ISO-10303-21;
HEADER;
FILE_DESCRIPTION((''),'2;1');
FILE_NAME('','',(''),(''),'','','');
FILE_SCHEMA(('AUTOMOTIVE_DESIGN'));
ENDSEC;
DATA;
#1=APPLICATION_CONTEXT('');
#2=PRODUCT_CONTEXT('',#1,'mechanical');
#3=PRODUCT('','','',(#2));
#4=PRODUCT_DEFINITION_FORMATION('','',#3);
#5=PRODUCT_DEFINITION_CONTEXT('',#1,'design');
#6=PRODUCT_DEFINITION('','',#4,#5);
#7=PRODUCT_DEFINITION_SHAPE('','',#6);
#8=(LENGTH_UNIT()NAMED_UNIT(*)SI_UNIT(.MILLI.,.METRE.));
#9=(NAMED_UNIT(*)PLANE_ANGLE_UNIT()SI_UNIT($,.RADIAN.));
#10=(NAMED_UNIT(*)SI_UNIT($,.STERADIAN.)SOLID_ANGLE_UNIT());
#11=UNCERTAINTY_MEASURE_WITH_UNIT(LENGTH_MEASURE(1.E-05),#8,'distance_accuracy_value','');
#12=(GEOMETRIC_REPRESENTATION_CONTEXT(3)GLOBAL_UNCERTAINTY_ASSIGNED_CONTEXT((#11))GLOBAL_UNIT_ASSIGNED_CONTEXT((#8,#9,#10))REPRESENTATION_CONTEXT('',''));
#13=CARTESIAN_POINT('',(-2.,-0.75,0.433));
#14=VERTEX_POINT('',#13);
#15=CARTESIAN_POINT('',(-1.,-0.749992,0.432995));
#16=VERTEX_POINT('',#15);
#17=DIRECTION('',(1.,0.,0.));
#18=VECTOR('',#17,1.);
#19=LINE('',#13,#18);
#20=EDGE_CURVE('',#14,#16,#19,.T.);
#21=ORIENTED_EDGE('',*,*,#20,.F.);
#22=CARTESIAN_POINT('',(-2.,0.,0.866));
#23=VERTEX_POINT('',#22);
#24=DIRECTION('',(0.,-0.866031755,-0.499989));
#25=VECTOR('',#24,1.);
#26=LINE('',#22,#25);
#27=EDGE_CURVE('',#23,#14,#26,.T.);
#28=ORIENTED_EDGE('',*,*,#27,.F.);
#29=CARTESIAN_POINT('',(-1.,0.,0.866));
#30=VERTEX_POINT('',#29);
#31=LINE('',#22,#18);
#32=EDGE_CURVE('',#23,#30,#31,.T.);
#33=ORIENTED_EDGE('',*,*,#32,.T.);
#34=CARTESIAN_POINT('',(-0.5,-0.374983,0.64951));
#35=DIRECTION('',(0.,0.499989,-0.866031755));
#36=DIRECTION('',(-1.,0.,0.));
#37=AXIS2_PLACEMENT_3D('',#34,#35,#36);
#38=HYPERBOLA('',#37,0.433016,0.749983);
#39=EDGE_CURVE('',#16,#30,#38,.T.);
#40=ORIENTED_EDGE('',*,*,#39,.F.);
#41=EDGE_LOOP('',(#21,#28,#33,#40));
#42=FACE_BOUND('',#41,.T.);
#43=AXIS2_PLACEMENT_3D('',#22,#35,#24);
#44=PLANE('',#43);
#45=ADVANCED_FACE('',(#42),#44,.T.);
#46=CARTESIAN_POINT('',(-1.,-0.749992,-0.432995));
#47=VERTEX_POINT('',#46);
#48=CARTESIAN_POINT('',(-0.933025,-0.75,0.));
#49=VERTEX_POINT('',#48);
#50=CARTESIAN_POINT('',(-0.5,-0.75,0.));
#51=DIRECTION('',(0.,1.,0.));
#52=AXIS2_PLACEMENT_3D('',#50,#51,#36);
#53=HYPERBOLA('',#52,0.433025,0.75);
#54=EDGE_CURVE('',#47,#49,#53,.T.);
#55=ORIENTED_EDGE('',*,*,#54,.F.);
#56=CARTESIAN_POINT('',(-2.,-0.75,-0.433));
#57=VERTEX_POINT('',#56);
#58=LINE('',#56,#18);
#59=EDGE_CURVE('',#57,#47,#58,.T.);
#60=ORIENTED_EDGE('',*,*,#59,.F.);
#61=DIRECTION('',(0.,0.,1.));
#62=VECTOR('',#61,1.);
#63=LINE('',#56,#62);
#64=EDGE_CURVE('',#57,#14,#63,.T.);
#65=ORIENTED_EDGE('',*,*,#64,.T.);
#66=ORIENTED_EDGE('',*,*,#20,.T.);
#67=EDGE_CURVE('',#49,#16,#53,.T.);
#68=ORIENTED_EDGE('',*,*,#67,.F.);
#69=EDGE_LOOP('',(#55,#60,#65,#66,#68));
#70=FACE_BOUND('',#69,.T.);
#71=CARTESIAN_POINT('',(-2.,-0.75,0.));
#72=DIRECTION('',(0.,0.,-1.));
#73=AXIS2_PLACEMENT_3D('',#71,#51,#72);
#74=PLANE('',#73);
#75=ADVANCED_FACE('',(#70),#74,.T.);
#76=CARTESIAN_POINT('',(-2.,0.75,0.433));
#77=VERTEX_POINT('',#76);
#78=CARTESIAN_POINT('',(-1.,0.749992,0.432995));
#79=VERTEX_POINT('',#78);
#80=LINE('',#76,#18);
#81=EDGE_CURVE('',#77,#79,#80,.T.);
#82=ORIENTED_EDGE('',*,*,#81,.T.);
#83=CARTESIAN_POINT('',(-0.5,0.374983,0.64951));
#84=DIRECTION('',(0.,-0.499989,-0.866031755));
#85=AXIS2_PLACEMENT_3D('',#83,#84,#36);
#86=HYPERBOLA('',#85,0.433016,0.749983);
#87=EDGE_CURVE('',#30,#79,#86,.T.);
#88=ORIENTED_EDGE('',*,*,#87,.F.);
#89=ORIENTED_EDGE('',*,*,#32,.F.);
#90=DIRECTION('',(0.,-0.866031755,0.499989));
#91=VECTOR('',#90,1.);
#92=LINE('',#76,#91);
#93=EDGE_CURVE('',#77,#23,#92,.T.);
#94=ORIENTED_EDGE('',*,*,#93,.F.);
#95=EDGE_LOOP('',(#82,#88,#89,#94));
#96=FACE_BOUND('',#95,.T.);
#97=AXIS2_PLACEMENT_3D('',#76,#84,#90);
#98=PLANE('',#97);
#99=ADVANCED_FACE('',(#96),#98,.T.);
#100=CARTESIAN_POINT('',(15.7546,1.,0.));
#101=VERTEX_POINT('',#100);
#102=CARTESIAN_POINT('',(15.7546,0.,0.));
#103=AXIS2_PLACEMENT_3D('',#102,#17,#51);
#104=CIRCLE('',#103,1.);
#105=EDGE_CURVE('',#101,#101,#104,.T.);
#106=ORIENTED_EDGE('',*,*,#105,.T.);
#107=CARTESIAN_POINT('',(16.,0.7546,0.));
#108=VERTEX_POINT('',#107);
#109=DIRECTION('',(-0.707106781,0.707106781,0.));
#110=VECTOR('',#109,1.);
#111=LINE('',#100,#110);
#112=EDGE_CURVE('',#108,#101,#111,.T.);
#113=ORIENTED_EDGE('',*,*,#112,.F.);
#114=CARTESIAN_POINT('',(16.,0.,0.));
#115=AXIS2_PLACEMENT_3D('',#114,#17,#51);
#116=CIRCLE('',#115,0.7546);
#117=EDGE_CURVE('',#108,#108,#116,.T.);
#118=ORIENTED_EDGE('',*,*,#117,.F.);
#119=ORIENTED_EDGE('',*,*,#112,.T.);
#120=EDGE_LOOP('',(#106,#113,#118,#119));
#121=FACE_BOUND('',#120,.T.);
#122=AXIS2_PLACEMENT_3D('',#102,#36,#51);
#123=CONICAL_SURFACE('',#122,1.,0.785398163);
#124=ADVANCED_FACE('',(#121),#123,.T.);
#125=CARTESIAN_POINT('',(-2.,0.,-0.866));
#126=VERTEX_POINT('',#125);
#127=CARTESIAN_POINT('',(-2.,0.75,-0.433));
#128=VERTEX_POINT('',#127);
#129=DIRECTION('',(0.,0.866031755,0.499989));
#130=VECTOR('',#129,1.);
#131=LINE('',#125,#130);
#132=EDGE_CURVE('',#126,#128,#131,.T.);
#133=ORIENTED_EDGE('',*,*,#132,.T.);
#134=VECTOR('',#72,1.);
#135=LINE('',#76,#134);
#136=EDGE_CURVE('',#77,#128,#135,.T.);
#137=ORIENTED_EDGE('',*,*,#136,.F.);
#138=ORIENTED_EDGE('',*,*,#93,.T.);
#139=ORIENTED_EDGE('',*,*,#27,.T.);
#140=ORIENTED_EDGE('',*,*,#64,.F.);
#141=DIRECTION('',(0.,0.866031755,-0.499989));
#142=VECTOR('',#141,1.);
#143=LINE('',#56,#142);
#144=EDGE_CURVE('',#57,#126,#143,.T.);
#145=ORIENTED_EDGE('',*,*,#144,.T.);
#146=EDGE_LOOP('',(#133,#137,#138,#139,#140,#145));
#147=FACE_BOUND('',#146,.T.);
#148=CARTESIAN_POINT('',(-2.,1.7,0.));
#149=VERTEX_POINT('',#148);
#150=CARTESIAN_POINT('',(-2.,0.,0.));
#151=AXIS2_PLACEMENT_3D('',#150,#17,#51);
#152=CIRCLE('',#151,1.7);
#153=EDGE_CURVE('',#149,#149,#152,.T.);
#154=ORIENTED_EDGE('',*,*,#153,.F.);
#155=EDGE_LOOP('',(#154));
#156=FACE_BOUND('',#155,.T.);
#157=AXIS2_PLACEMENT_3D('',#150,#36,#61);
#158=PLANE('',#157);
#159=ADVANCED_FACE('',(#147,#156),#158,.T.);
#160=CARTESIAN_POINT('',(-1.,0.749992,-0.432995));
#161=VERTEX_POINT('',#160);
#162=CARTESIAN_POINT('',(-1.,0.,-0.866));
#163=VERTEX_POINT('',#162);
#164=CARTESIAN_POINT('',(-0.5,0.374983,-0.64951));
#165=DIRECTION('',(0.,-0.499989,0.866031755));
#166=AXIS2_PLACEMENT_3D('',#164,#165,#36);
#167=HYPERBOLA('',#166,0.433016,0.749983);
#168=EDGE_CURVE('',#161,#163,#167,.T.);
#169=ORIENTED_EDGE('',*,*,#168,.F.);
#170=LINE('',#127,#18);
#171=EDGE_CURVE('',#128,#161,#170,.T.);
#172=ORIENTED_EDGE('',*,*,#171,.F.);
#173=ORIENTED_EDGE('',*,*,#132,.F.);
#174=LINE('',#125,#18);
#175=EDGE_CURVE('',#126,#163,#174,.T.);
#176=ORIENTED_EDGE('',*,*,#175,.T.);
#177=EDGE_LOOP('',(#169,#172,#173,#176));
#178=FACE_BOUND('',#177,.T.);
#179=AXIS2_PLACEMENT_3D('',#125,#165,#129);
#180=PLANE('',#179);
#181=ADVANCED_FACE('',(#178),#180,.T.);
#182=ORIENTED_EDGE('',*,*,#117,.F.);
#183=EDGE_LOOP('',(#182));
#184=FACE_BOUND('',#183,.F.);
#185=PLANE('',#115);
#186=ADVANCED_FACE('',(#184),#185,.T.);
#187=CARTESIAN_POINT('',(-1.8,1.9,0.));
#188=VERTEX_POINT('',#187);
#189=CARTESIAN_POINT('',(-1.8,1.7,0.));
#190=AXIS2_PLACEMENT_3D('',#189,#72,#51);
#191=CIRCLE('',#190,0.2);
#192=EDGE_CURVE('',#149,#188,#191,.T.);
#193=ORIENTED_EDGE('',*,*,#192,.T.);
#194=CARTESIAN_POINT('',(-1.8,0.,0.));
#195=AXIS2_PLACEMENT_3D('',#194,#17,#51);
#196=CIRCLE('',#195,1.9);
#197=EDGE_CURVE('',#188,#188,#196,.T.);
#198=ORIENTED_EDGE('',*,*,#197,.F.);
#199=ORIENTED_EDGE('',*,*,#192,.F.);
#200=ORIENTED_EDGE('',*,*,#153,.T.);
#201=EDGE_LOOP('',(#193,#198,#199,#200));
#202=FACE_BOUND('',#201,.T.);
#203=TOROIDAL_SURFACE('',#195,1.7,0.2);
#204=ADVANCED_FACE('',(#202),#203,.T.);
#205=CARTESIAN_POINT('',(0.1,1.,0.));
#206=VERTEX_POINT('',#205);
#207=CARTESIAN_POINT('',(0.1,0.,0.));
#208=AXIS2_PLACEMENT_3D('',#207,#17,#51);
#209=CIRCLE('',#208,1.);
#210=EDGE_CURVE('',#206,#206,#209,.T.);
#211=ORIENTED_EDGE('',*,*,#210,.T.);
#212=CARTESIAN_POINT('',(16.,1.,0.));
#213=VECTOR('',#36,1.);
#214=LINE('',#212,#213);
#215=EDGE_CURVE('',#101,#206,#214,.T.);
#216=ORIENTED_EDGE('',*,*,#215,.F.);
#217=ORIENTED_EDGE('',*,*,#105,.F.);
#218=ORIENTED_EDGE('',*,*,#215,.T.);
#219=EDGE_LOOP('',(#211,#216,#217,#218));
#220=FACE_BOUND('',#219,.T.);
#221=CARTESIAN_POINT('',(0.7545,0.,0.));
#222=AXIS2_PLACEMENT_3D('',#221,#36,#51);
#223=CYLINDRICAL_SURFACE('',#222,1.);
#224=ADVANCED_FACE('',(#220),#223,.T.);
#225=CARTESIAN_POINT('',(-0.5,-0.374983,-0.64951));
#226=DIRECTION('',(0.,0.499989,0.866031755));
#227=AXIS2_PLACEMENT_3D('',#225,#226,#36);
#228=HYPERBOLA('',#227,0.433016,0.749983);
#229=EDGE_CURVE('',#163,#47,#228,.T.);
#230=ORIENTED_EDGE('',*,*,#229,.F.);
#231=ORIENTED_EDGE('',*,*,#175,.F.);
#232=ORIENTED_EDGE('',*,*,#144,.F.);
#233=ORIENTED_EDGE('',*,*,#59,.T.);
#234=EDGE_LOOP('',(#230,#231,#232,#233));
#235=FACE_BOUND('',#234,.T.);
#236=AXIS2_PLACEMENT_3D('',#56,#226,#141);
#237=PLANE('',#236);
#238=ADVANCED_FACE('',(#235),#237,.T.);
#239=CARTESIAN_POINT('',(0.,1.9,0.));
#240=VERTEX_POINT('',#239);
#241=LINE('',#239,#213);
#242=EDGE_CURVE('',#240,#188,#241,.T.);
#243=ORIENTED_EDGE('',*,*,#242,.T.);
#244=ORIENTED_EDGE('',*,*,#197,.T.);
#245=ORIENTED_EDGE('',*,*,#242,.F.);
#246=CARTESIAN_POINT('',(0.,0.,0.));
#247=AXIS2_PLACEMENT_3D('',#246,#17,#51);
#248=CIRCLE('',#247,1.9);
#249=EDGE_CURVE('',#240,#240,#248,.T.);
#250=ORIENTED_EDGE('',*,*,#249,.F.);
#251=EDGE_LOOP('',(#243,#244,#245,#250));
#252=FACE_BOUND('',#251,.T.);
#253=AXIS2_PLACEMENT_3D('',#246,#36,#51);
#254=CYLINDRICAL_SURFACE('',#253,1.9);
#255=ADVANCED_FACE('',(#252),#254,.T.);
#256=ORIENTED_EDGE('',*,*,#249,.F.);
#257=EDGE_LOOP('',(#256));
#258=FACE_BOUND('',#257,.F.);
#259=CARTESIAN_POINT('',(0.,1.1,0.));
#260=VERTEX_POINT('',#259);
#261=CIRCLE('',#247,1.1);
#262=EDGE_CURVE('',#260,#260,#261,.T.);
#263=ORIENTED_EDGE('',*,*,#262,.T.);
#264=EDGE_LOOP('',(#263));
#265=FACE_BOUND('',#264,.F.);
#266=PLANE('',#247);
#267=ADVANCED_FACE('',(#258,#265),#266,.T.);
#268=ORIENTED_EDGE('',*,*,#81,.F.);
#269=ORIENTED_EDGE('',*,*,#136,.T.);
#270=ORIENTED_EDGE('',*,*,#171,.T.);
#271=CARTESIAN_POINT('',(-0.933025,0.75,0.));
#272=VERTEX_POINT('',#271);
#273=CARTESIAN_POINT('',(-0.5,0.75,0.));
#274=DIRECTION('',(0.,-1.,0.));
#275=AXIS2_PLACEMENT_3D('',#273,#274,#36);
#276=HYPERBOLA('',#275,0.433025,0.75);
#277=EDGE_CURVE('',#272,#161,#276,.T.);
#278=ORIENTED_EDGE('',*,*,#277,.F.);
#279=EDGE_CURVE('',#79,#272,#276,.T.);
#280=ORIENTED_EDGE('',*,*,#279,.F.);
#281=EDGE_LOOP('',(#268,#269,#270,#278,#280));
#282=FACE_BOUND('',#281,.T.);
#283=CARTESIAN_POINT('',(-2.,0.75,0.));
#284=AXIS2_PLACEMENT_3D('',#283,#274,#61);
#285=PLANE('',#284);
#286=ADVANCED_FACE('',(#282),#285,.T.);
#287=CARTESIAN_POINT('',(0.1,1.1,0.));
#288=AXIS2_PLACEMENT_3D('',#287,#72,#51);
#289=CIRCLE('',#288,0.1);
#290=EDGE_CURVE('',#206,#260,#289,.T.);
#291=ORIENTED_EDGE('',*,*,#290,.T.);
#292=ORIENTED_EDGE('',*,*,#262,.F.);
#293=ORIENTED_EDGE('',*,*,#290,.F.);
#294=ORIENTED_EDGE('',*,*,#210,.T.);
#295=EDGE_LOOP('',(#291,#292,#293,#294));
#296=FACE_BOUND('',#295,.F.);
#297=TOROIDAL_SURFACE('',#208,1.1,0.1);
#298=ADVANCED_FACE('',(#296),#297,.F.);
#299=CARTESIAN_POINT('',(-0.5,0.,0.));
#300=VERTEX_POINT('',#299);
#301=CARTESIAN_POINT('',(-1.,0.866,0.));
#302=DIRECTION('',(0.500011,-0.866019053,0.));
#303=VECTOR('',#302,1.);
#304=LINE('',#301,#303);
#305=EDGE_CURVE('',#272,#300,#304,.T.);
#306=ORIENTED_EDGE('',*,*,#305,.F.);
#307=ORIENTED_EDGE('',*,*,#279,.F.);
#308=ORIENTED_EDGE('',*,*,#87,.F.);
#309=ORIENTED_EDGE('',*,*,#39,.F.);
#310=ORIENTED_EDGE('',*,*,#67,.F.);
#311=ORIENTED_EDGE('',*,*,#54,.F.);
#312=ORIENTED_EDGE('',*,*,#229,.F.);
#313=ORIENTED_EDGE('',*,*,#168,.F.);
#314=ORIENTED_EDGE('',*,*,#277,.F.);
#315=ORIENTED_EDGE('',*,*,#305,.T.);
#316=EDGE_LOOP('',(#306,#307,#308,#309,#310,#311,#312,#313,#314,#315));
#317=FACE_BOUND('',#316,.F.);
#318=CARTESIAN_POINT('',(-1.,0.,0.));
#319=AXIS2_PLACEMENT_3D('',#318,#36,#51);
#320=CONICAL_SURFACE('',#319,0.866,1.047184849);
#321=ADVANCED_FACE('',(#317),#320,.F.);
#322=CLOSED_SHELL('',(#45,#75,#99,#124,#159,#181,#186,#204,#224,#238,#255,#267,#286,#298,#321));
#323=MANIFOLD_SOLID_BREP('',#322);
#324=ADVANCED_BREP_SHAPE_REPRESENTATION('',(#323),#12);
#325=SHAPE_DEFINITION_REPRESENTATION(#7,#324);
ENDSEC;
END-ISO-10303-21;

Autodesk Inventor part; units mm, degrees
ref_plane "YZ Plane" through (0, 0, 0) normal (1, 0, 0) x (0, 1, 0)
ref_plane "XZ Plane" through (0, 0, 0) normal (0, 1, 0) x (-1, 0, 0)
sketch "Sketch1" plane through (0, 0, 0) normal (0, 0, 1) x (1, 0, 0)
  line L0 (-0.5, 0) -> (16, 0)
  line L1 (16, 0) -> (16, 1)
  line L2 (16, 1) -> (1, 1)
  line L3 (1, 1) -> (0.7545, 1)
  line L4 (0.7545, 1) -> (0, 1)
  line L5 (0, 1) -> (0, 1.9)
  line L6 (0, 1.9) -> (-2, 1.9)
  line L7 (-2, 1.9) -> (-2, 0.866)
  line L8 (-2, 0.866) -> (-1, 0.866)
  line L9 (-1, 0.866) -> (-0.5, 0)
  line L10 (-5.6, 0) -> (19.6, 0) projected
  line L11 (0, -0.38) -> (0, 2.28) projected
  line L12 (1, 1) -> (0, 1) construction
  dimension "d1" = 15
  dimension "d2" = 0.2455
  dimension "d3" = 2
  dimension "d4" = 1
  dimension "d5" = 60
  dimension "d6" = 2
  dimension "d7" = 2
  dimension "d8" = 1.7321
  dimension "d9" = 3.8
  dimension "d26" = 16
revolve "Body" add sketch "Sketch1" angle 360 about axis through (-0.5, 0, 0) along (1, 0, 0)
sketch "Sketch2" plane through (-2, 0, 0) normal (-1, 0, 0) x (0, 0, 1)
  circle A0 centre (0, 0) radius 0.866 projected
  line L0 (0, -2.66) -> (0, 2.66) projected
  line L1 (-2.66, 0) -> (2.66, 0) projected
  line L2 (0.866, 0) -> (0.433, -0.75)
  line L3 (0.433, -0.75) -> (-0.433, -0.75)
  line L4 (-0.433, -0.75) -> (-0.866, 0)
  line L5 (-0.866, 0) -> (-0.433, 0.75)
  line L6 (-0.433, 0.75) -> (0.433, 0.75)
  line L7 (0.433, 0.75) -> (0.866, 0)
  point P0 (0, 0)
extrude "Slot" add sketch "Sketch2" against normal up to next contours L7 A0 | A0 L2 | L6 L0 A0 | A0 L0 L3 | L0 L6 A0 | A0 L3 L0 | L4 A0 | A0 L5
fillet "Fillet1" radius 0.2 1 edges at (-2, -1.9, 0)
thread "Thread" size "M2x0.4" class "6g" standard "ISO Metric profile" length 15
chamfer "Chamfer1" distance 0.2454 distance2 0.2454 1 edges at (16, -1, 0) measured on face at (16, -0.5786, -0.2558)
ref_plane "Work Plane1" through (29, 0, 0) normal (0, -1, 0) x (1, 0, 0)
fillet "Fillet2" radius 0.1 1 edges at (0, -1, 0)
equation "\"d30\" = R"
equation "\"d17\" = RR"
equation "\"d13\" = GEL"
equation "\"d15\" = -0.5 * SPD + 0.5 * GD"
equation "\"d16\" = GUL"
equation "\"d1\" = GEL"
equation "\"d3\" = KOH"
equation "\"d4\" = INTI"
equation "\"d6\" = GD"
equation "\"d7\" = BDM"
equation "\"d8\" = 1.1547 * SW"
equation "\"d9\" = KOD"
equation "\"d26\" = NLG"
equation "\"GD\" = 2"
equation "\"NLG\" = 16"
equation "\"GEL\" = 15"
equation "\"KOD\" = 3.8"
equation "\"KOH\" = 2"
equation "\"INTI\" = 1"
equation "\"GAL\" = 0.61345 * PTC"
equation "\"GUL\" = 0.61345 * PTC"
equation "\"BDM\" = NND"
equation "\"SW\" = 1.5"
equation "\"RR\" = 0.2"
equation "\"SPD\" = NND - 1.2269 * PTC"
equation "\"R\" = 0.1"
equation "\"TOA\" = 30deg"
equation "\"GD1\" = THREADDIA - 1.2269 * PTC"
equation "\"THREADDIA\" = 2"
equation "\"FAWI\" = 45deg"
equation "\"PTC\" = 0.4"
equation "\"NND\" = 2"
equation "\"E0\" = 1.155 * SW"
properties part number "ISO 4762 - M2 x 16" material "Stainless Steel, 440C"
